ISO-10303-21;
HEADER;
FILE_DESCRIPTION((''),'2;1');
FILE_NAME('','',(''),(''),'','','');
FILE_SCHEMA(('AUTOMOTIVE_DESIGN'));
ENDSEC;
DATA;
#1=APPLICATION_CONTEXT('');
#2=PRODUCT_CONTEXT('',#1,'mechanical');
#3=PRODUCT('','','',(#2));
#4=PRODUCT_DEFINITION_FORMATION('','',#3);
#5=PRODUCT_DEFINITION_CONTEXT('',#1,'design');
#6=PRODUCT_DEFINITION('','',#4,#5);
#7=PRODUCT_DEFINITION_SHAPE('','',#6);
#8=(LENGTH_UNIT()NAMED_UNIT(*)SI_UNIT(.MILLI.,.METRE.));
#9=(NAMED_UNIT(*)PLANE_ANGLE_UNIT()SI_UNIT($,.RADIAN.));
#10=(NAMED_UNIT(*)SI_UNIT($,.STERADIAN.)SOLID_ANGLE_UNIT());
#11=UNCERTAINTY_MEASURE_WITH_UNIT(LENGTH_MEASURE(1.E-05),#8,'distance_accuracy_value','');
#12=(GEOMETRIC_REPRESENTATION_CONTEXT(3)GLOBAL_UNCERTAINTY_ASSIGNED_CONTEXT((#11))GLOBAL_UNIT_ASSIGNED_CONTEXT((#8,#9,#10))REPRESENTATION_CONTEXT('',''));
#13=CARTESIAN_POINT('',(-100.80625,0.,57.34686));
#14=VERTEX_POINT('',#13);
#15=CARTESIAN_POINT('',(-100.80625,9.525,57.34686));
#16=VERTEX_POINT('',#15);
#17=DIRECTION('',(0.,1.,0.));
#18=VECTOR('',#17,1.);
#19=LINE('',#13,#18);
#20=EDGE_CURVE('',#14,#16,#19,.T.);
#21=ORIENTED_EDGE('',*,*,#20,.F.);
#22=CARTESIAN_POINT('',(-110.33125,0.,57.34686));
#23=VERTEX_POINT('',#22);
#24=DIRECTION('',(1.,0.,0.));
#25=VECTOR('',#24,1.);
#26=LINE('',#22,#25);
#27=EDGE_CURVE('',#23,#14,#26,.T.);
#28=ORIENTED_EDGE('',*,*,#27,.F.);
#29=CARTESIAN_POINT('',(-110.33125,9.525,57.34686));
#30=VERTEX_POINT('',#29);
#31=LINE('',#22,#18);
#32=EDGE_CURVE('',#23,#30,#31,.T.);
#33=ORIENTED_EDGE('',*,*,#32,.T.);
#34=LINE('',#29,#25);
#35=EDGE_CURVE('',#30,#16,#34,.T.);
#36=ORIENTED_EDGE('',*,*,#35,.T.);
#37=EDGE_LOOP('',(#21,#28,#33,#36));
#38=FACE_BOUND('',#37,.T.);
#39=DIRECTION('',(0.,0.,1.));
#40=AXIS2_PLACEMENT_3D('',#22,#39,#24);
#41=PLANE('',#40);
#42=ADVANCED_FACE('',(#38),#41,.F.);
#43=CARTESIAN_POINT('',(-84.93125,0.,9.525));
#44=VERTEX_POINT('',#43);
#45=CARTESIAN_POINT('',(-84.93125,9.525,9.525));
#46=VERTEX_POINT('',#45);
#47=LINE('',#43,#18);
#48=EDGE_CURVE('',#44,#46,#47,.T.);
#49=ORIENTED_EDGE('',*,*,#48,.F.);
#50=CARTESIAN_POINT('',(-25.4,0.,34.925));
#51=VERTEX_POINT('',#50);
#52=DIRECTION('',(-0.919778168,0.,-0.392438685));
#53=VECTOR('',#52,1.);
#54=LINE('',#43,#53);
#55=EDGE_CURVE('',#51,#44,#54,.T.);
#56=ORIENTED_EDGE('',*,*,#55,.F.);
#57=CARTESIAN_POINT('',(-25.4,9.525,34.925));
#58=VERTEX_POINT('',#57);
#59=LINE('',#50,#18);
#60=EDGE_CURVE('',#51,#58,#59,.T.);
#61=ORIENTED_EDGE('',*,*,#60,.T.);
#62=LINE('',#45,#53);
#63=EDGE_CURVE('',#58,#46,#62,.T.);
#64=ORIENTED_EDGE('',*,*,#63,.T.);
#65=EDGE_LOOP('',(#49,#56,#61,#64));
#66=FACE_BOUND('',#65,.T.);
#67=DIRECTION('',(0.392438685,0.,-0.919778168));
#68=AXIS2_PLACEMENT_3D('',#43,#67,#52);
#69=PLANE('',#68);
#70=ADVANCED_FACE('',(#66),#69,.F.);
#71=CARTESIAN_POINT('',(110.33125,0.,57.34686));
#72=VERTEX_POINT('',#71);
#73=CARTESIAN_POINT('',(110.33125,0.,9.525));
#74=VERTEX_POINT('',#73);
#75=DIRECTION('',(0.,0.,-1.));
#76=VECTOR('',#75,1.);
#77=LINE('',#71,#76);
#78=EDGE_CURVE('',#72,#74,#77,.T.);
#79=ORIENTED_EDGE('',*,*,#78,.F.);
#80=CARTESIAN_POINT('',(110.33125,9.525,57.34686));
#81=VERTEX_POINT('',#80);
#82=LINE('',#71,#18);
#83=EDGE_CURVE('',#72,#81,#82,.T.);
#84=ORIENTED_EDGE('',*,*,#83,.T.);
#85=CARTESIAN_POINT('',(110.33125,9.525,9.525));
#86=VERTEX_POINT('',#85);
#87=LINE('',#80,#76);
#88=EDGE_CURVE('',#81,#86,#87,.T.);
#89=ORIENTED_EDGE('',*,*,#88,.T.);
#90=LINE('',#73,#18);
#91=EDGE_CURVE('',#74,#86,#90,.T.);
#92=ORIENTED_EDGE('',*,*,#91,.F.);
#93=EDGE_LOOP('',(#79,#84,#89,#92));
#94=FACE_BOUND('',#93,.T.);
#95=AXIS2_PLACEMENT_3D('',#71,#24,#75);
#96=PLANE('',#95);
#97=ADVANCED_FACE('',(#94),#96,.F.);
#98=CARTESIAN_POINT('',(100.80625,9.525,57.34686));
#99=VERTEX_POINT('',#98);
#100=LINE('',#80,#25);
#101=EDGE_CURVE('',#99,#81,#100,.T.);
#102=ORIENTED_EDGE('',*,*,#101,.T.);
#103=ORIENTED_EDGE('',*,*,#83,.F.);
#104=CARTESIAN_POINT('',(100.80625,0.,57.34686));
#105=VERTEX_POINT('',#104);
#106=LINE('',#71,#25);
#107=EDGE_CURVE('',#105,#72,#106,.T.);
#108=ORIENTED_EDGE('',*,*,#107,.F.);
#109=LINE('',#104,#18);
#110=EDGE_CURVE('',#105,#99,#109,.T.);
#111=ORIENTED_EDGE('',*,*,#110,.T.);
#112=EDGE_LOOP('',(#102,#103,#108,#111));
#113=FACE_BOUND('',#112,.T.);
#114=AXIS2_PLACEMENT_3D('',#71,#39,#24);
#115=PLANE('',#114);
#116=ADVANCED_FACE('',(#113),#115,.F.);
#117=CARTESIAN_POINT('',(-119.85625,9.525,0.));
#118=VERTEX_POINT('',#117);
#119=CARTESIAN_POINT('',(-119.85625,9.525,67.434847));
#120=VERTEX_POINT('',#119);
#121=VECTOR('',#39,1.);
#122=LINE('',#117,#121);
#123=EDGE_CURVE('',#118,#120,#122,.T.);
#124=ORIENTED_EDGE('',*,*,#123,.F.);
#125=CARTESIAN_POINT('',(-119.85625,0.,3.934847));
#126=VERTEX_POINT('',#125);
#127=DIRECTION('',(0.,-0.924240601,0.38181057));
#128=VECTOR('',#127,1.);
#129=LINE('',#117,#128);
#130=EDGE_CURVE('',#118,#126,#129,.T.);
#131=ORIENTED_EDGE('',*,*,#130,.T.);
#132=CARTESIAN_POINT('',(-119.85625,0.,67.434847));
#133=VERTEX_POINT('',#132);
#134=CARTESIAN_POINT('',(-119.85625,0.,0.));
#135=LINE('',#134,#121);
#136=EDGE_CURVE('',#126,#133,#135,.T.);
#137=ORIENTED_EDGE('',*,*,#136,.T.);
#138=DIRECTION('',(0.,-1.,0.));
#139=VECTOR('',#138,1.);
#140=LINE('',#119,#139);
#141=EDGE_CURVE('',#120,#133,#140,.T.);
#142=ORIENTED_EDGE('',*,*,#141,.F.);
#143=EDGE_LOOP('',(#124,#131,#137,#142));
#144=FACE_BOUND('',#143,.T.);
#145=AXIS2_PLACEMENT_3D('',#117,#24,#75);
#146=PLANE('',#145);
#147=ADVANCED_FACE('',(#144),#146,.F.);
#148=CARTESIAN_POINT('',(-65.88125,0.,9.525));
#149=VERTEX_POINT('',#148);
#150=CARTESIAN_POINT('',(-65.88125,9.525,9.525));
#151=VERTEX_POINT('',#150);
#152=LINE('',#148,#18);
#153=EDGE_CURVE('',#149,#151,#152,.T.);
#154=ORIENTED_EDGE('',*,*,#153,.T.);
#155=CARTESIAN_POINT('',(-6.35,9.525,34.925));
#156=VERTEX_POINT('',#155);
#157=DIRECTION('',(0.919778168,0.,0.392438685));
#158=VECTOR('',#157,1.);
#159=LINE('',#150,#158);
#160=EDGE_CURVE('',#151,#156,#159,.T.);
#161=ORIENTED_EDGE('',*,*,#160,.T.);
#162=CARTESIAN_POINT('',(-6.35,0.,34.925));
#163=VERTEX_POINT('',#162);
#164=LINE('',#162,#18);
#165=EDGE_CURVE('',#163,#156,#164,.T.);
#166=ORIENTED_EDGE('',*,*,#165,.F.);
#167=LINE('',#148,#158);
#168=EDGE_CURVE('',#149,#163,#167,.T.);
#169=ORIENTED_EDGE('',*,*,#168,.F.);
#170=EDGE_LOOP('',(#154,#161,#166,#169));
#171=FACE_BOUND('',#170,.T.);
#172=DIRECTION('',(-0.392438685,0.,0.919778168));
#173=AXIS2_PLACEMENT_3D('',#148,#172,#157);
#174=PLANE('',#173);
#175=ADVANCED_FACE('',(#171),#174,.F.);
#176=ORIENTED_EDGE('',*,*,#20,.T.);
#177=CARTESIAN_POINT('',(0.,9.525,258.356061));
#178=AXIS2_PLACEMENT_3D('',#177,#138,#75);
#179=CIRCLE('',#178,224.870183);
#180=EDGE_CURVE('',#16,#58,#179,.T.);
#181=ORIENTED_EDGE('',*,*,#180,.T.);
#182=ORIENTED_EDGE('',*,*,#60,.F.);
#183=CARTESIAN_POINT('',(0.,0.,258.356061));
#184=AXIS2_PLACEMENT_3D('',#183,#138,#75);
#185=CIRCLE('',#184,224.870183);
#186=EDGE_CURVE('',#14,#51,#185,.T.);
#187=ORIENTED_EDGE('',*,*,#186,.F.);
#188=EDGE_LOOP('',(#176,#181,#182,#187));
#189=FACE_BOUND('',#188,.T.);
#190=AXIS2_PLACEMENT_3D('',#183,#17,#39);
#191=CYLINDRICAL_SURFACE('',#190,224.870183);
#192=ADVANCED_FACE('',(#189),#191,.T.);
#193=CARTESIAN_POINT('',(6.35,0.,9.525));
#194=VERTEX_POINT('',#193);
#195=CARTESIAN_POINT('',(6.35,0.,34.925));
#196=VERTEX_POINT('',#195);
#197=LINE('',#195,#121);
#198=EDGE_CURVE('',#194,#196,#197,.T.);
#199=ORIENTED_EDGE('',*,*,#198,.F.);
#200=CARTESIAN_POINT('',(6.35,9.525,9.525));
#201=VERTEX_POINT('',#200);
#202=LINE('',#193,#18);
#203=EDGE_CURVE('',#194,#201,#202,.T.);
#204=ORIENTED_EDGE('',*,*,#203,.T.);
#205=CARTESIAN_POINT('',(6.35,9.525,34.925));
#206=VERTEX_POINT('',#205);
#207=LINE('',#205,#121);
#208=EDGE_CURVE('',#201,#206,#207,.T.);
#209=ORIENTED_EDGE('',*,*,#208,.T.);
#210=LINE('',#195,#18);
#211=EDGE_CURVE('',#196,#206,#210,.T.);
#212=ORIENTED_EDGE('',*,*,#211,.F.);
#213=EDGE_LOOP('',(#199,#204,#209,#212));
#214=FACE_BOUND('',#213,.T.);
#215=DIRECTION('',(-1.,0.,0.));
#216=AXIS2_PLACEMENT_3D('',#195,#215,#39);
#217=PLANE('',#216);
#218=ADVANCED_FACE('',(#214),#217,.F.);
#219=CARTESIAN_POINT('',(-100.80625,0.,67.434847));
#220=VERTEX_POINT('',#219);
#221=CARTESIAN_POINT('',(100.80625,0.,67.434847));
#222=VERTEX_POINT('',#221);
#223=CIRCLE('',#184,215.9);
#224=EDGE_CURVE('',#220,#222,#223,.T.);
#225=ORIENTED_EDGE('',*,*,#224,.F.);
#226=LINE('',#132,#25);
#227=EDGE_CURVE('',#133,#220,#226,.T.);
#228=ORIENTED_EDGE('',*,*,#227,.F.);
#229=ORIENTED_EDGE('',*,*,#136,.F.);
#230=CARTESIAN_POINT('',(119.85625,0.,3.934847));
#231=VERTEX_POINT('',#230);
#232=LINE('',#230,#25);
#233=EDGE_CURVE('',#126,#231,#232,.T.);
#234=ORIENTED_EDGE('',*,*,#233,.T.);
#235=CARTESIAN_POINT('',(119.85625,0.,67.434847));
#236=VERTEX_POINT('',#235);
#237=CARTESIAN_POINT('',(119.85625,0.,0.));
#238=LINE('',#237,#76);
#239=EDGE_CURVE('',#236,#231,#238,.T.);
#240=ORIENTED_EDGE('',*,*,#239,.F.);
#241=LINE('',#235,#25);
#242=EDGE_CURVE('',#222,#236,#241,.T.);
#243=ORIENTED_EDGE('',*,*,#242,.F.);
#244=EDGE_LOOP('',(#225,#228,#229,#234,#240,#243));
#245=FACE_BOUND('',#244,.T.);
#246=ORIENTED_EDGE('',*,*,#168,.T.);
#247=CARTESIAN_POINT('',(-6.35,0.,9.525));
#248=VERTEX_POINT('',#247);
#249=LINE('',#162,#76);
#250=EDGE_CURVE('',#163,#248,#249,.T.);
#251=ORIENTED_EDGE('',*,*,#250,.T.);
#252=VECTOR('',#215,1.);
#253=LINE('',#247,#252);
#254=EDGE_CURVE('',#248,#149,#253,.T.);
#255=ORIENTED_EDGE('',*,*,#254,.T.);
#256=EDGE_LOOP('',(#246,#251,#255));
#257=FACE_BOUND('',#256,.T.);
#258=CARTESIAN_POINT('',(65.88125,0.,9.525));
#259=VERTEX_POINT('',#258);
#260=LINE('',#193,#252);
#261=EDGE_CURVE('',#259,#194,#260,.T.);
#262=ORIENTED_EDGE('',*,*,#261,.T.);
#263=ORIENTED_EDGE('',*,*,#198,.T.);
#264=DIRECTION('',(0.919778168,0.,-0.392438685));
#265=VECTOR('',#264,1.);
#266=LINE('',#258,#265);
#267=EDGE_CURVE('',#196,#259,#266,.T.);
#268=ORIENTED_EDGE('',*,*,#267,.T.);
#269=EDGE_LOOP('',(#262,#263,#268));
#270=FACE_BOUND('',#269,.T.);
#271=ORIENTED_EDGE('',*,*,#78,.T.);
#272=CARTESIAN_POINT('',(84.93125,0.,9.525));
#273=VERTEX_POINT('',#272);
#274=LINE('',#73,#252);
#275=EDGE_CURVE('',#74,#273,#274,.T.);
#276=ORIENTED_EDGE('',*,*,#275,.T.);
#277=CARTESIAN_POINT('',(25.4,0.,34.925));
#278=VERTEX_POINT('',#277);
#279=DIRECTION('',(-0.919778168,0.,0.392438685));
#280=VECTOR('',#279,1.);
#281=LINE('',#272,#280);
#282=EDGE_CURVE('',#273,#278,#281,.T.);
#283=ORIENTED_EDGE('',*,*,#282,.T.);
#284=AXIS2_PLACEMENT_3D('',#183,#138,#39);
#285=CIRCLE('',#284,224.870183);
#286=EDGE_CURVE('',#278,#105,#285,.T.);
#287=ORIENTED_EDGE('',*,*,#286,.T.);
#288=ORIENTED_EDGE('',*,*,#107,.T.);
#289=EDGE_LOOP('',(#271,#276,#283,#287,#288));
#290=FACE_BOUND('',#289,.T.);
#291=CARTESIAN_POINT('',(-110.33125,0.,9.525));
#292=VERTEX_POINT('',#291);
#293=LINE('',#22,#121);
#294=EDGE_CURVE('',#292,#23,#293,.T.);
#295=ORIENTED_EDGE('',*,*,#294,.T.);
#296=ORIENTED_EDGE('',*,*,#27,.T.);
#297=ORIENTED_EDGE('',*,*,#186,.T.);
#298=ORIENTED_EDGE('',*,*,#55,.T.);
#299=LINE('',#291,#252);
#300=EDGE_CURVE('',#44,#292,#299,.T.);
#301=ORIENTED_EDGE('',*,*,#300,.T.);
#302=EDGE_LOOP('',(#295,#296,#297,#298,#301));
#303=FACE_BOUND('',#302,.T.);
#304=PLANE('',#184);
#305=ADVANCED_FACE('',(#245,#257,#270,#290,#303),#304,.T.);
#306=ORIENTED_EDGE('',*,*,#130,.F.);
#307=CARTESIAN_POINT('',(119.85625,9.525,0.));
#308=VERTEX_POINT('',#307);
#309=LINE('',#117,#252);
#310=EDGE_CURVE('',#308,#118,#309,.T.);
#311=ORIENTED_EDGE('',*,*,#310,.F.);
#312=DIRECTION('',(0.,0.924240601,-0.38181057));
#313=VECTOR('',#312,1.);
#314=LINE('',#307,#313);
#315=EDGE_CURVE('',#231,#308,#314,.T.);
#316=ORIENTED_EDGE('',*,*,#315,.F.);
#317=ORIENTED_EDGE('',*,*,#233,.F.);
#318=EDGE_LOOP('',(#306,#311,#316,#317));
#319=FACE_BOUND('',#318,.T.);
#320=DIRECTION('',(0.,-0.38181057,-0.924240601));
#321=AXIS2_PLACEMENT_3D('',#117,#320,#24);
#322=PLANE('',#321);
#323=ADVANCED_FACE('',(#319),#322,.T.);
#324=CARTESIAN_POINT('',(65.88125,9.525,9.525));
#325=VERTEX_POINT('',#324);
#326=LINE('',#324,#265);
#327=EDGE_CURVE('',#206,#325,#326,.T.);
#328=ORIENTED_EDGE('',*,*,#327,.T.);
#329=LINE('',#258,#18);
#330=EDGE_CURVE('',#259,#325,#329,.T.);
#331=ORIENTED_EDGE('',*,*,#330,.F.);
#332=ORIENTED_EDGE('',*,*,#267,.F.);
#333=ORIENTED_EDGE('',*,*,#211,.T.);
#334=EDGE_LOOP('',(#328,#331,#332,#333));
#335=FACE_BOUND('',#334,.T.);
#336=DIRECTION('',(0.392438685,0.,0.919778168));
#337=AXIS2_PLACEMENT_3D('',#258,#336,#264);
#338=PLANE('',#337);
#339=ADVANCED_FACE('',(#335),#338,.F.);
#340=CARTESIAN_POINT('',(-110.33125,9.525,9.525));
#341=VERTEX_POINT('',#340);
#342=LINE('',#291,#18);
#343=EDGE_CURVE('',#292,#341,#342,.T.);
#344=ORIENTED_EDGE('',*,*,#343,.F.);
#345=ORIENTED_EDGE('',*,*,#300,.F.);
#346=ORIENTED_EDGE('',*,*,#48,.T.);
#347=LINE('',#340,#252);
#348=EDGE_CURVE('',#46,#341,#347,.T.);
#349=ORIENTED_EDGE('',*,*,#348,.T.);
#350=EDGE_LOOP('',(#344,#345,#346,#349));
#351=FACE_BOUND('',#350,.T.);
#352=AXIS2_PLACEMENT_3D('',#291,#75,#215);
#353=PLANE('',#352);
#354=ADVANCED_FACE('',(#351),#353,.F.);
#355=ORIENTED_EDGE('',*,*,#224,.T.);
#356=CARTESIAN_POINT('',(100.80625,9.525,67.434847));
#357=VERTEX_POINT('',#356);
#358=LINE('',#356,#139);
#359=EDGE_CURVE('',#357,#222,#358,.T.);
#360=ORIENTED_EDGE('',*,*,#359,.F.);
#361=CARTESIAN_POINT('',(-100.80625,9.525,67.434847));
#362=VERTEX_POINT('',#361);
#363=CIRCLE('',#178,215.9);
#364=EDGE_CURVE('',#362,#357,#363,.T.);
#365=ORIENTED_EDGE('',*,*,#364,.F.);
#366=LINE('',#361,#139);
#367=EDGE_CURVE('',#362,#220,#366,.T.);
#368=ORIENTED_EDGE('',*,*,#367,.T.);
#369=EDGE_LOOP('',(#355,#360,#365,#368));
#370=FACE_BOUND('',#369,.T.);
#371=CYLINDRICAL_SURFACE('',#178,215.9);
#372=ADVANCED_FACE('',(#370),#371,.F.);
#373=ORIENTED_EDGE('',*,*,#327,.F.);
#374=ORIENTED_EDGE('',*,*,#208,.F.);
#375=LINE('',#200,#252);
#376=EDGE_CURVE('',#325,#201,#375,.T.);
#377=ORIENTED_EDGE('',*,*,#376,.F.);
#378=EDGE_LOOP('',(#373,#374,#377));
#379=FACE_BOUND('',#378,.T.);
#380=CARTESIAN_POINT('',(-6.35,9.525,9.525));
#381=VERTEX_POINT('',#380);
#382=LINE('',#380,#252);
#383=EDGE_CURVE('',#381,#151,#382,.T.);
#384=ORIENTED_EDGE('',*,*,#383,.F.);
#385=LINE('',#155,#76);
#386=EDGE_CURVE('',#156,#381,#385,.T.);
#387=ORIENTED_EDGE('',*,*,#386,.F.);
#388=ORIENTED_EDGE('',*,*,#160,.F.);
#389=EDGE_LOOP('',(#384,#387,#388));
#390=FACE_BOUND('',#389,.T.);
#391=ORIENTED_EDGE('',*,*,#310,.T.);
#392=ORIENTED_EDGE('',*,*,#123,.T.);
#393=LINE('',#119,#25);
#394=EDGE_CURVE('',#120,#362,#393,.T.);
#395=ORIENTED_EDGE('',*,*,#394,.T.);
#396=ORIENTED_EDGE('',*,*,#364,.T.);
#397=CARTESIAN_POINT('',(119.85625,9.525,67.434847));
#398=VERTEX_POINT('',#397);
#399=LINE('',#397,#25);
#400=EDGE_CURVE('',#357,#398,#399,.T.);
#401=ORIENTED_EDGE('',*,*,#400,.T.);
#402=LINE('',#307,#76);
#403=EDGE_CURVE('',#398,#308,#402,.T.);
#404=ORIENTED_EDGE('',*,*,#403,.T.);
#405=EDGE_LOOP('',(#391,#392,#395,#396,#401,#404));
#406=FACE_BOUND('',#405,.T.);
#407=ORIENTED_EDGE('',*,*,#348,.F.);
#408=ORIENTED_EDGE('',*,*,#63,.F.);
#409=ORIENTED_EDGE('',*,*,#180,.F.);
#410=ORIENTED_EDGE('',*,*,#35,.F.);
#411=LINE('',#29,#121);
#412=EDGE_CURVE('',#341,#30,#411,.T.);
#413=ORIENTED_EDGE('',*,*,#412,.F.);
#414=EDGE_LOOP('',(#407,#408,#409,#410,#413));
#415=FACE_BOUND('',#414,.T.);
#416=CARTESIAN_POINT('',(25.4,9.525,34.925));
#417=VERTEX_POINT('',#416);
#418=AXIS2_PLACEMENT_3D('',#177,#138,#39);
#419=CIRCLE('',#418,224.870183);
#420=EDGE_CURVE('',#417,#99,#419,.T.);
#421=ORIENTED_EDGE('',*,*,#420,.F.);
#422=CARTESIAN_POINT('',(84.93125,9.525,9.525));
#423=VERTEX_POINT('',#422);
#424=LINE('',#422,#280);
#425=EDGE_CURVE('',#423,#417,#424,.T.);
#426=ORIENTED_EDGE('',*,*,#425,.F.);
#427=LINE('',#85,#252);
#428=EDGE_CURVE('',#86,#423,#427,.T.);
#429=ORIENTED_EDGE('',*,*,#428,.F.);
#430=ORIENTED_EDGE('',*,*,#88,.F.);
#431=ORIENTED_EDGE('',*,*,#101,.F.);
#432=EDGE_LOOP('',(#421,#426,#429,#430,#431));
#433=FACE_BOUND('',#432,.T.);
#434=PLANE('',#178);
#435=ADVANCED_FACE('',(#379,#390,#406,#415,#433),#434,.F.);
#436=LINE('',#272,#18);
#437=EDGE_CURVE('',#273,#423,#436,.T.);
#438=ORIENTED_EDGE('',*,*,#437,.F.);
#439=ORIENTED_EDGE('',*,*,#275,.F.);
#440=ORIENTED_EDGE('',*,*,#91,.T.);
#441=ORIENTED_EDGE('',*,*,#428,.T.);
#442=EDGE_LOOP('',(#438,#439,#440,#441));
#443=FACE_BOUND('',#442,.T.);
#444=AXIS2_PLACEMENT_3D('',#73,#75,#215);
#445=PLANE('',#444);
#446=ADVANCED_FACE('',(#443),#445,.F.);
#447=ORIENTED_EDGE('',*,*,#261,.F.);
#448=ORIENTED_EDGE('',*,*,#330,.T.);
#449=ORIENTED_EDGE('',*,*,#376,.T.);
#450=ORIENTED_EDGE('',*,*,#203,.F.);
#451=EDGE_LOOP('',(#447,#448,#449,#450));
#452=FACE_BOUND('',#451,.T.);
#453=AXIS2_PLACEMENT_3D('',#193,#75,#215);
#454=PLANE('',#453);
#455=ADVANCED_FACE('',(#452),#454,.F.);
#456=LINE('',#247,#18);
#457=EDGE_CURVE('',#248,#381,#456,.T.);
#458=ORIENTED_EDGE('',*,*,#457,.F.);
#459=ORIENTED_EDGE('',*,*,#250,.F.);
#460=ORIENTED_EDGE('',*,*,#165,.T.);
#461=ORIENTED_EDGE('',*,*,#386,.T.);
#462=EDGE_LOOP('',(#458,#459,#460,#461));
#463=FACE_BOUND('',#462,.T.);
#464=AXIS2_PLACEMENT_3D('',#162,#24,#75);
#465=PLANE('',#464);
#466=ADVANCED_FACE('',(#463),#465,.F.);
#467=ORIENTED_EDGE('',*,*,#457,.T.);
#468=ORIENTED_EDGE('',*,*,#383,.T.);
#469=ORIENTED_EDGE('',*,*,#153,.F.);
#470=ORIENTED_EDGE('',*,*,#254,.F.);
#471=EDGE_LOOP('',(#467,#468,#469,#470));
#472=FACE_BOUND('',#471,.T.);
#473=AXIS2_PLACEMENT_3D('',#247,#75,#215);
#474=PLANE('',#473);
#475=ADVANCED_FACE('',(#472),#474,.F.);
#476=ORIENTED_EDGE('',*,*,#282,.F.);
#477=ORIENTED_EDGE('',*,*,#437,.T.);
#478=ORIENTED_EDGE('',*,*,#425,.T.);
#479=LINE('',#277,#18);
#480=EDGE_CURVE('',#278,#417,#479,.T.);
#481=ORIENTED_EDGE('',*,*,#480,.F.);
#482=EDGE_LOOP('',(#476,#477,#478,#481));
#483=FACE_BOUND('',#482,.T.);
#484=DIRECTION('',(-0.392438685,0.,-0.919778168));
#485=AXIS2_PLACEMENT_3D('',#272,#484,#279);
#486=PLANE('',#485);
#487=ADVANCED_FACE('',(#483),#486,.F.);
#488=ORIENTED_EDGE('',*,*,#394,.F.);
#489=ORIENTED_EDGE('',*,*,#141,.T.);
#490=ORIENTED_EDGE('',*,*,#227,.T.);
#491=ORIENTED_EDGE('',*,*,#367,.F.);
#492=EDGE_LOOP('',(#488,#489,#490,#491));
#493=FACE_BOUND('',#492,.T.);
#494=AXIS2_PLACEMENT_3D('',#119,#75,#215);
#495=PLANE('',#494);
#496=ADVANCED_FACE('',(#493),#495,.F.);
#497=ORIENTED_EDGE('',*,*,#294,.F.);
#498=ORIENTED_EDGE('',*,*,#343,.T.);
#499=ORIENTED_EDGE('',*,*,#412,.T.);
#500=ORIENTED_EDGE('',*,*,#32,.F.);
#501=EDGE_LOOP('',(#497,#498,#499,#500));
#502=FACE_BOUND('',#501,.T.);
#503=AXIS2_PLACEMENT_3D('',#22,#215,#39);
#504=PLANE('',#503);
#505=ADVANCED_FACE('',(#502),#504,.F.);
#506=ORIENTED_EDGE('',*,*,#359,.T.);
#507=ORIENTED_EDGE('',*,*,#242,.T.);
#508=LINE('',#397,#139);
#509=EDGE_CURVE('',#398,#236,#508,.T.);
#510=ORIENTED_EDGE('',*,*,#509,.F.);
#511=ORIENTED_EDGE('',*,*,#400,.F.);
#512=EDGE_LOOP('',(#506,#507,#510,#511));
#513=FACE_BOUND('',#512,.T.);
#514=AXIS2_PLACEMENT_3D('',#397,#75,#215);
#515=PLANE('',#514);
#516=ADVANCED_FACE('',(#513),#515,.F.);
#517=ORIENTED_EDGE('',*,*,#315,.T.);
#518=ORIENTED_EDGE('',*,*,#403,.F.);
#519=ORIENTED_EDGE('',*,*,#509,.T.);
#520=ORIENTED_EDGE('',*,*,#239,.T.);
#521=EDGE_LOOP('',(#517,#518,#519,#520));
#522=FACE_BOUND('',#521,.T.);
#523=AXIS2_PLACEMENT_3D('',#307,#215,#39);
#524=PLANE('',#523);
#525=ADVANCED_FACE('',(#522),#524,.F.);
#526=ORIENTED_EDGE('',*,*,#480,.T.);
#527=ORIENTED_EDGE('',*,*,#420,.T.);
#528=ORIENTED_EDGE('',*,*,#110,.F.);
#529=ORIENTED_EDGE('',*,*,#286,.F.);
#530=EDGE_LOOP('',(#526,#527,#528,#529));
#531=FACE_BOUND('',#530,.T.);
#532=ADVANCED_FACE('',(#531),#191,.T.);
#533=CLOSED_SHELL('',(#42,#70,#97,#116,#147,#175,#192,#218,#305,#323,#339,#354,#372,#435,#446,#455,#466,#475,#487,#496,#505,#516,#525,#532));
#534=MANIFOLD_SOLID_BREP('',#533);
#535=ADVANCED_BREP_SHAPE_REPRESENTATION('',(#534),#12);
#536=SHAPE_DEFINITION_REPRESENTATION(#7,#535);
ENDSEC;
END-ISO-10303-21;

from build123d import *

# Parameters (mm, degrees)
BOSS_EXTRUDE1_DEPTH = 9.525
CHAMFER1_SIZE2      = 3.93484735
CHAMFER1_SIZE       = 9.525
CUT_EXTRUDE1_DEPTH  = 138.853926046


with BuildPart() as part:
    # Sketch1 → Boss-Extrude1 (new body)
    with BuildSketch(Plane(origin=(0, 0, 0), x_dir=(1, 0, 0), z_dir=(0, 1, 0))):
        with BuildLine():
            Line((-119.85625, 0), (119.85625, 0))
            Line((119.85625, 0), (119.85625, -67.43484735))
            Line((119.85625, -67.43484735), (100.80625, -67.43484735))
            ThreePointArc((100.80625, -67.43484735), (0, -42.456061365), (-100.80625, -67.43484735))
            Line((-100.80625, -67.43484735), (-119.85625, -67.43484735))
            Line((-119.85625, -67.43484735), (-119.85625, 0))
        make_face()
    extrude(amount=BOSS_EXTRUDE1_DEPTH)

    # Chamfer1
    chamfer1_edges = [part.edges().sort_by_distance(p)[0] for p in [
        (0, 0, 0),
    ]]
    chamfer1_side = [part.faces().sort_by_distance(p)[0] for p in [
        (0, 0.078696947, 0),
    ]]
    chamfer(chamfer1_edges, length=CHAMFER1_SIZE - 0.0001, length2=CHAMFER1_SIZE2 - 0.0001, reference=chamfer1_side[0])  # a hair under: the kernel refuses the full size

    # Sketch3 → Cut-Extrude1 (cut, through all)
    with BuildSketch(Plane(origin=(0, 9.525, 0), x_dir=(1, 0, 0), z_dir=(0, 1, 0))):
        with BuildLine():
            Line((-110.33125, -57.346859726), (-110.33125, -9.525))
            Line((-110.33125, -9.525), (-84.93125, -9.525))
            Line((-84.93125, -9.525), (-25.4, -34.925))
            ThreePointArc((-25.4, -34.925), (-64.091257853, -42.812771399), (-100.80625, -57.346859726))
            Line((-100.80625, -57.346859726), (-110.33125, -57.346859726))
        make_face()
        Polygon((-65.88125, -9.525), (-6.35, -34.925), (-6.35, -9.525), align=None)
        with BuildLine():
            Line((110.33125, -57.346859726), (100.80625, -57.346859726))
            ThreePointArc((100.80625, -57.346859726), (64.091257853, -42.812771399), (25.4, -34.925))
            Line((25.4, -34.925), (84.93125, -9.525))
            Line((84.93125, -9.525), (110.33125, -9.525))
            Line((110.33125, -9.525), (110.33125, -57.346859726))
        make_face()
        Polygon((6.35, -9.525), (65.88125, -9.525), (6.35, -34.925), align=None)
    extrude(amount=-CUT_EXTRUDE1_DEPTH, mode=Mode.SUBTRACT)


solid = part.part
